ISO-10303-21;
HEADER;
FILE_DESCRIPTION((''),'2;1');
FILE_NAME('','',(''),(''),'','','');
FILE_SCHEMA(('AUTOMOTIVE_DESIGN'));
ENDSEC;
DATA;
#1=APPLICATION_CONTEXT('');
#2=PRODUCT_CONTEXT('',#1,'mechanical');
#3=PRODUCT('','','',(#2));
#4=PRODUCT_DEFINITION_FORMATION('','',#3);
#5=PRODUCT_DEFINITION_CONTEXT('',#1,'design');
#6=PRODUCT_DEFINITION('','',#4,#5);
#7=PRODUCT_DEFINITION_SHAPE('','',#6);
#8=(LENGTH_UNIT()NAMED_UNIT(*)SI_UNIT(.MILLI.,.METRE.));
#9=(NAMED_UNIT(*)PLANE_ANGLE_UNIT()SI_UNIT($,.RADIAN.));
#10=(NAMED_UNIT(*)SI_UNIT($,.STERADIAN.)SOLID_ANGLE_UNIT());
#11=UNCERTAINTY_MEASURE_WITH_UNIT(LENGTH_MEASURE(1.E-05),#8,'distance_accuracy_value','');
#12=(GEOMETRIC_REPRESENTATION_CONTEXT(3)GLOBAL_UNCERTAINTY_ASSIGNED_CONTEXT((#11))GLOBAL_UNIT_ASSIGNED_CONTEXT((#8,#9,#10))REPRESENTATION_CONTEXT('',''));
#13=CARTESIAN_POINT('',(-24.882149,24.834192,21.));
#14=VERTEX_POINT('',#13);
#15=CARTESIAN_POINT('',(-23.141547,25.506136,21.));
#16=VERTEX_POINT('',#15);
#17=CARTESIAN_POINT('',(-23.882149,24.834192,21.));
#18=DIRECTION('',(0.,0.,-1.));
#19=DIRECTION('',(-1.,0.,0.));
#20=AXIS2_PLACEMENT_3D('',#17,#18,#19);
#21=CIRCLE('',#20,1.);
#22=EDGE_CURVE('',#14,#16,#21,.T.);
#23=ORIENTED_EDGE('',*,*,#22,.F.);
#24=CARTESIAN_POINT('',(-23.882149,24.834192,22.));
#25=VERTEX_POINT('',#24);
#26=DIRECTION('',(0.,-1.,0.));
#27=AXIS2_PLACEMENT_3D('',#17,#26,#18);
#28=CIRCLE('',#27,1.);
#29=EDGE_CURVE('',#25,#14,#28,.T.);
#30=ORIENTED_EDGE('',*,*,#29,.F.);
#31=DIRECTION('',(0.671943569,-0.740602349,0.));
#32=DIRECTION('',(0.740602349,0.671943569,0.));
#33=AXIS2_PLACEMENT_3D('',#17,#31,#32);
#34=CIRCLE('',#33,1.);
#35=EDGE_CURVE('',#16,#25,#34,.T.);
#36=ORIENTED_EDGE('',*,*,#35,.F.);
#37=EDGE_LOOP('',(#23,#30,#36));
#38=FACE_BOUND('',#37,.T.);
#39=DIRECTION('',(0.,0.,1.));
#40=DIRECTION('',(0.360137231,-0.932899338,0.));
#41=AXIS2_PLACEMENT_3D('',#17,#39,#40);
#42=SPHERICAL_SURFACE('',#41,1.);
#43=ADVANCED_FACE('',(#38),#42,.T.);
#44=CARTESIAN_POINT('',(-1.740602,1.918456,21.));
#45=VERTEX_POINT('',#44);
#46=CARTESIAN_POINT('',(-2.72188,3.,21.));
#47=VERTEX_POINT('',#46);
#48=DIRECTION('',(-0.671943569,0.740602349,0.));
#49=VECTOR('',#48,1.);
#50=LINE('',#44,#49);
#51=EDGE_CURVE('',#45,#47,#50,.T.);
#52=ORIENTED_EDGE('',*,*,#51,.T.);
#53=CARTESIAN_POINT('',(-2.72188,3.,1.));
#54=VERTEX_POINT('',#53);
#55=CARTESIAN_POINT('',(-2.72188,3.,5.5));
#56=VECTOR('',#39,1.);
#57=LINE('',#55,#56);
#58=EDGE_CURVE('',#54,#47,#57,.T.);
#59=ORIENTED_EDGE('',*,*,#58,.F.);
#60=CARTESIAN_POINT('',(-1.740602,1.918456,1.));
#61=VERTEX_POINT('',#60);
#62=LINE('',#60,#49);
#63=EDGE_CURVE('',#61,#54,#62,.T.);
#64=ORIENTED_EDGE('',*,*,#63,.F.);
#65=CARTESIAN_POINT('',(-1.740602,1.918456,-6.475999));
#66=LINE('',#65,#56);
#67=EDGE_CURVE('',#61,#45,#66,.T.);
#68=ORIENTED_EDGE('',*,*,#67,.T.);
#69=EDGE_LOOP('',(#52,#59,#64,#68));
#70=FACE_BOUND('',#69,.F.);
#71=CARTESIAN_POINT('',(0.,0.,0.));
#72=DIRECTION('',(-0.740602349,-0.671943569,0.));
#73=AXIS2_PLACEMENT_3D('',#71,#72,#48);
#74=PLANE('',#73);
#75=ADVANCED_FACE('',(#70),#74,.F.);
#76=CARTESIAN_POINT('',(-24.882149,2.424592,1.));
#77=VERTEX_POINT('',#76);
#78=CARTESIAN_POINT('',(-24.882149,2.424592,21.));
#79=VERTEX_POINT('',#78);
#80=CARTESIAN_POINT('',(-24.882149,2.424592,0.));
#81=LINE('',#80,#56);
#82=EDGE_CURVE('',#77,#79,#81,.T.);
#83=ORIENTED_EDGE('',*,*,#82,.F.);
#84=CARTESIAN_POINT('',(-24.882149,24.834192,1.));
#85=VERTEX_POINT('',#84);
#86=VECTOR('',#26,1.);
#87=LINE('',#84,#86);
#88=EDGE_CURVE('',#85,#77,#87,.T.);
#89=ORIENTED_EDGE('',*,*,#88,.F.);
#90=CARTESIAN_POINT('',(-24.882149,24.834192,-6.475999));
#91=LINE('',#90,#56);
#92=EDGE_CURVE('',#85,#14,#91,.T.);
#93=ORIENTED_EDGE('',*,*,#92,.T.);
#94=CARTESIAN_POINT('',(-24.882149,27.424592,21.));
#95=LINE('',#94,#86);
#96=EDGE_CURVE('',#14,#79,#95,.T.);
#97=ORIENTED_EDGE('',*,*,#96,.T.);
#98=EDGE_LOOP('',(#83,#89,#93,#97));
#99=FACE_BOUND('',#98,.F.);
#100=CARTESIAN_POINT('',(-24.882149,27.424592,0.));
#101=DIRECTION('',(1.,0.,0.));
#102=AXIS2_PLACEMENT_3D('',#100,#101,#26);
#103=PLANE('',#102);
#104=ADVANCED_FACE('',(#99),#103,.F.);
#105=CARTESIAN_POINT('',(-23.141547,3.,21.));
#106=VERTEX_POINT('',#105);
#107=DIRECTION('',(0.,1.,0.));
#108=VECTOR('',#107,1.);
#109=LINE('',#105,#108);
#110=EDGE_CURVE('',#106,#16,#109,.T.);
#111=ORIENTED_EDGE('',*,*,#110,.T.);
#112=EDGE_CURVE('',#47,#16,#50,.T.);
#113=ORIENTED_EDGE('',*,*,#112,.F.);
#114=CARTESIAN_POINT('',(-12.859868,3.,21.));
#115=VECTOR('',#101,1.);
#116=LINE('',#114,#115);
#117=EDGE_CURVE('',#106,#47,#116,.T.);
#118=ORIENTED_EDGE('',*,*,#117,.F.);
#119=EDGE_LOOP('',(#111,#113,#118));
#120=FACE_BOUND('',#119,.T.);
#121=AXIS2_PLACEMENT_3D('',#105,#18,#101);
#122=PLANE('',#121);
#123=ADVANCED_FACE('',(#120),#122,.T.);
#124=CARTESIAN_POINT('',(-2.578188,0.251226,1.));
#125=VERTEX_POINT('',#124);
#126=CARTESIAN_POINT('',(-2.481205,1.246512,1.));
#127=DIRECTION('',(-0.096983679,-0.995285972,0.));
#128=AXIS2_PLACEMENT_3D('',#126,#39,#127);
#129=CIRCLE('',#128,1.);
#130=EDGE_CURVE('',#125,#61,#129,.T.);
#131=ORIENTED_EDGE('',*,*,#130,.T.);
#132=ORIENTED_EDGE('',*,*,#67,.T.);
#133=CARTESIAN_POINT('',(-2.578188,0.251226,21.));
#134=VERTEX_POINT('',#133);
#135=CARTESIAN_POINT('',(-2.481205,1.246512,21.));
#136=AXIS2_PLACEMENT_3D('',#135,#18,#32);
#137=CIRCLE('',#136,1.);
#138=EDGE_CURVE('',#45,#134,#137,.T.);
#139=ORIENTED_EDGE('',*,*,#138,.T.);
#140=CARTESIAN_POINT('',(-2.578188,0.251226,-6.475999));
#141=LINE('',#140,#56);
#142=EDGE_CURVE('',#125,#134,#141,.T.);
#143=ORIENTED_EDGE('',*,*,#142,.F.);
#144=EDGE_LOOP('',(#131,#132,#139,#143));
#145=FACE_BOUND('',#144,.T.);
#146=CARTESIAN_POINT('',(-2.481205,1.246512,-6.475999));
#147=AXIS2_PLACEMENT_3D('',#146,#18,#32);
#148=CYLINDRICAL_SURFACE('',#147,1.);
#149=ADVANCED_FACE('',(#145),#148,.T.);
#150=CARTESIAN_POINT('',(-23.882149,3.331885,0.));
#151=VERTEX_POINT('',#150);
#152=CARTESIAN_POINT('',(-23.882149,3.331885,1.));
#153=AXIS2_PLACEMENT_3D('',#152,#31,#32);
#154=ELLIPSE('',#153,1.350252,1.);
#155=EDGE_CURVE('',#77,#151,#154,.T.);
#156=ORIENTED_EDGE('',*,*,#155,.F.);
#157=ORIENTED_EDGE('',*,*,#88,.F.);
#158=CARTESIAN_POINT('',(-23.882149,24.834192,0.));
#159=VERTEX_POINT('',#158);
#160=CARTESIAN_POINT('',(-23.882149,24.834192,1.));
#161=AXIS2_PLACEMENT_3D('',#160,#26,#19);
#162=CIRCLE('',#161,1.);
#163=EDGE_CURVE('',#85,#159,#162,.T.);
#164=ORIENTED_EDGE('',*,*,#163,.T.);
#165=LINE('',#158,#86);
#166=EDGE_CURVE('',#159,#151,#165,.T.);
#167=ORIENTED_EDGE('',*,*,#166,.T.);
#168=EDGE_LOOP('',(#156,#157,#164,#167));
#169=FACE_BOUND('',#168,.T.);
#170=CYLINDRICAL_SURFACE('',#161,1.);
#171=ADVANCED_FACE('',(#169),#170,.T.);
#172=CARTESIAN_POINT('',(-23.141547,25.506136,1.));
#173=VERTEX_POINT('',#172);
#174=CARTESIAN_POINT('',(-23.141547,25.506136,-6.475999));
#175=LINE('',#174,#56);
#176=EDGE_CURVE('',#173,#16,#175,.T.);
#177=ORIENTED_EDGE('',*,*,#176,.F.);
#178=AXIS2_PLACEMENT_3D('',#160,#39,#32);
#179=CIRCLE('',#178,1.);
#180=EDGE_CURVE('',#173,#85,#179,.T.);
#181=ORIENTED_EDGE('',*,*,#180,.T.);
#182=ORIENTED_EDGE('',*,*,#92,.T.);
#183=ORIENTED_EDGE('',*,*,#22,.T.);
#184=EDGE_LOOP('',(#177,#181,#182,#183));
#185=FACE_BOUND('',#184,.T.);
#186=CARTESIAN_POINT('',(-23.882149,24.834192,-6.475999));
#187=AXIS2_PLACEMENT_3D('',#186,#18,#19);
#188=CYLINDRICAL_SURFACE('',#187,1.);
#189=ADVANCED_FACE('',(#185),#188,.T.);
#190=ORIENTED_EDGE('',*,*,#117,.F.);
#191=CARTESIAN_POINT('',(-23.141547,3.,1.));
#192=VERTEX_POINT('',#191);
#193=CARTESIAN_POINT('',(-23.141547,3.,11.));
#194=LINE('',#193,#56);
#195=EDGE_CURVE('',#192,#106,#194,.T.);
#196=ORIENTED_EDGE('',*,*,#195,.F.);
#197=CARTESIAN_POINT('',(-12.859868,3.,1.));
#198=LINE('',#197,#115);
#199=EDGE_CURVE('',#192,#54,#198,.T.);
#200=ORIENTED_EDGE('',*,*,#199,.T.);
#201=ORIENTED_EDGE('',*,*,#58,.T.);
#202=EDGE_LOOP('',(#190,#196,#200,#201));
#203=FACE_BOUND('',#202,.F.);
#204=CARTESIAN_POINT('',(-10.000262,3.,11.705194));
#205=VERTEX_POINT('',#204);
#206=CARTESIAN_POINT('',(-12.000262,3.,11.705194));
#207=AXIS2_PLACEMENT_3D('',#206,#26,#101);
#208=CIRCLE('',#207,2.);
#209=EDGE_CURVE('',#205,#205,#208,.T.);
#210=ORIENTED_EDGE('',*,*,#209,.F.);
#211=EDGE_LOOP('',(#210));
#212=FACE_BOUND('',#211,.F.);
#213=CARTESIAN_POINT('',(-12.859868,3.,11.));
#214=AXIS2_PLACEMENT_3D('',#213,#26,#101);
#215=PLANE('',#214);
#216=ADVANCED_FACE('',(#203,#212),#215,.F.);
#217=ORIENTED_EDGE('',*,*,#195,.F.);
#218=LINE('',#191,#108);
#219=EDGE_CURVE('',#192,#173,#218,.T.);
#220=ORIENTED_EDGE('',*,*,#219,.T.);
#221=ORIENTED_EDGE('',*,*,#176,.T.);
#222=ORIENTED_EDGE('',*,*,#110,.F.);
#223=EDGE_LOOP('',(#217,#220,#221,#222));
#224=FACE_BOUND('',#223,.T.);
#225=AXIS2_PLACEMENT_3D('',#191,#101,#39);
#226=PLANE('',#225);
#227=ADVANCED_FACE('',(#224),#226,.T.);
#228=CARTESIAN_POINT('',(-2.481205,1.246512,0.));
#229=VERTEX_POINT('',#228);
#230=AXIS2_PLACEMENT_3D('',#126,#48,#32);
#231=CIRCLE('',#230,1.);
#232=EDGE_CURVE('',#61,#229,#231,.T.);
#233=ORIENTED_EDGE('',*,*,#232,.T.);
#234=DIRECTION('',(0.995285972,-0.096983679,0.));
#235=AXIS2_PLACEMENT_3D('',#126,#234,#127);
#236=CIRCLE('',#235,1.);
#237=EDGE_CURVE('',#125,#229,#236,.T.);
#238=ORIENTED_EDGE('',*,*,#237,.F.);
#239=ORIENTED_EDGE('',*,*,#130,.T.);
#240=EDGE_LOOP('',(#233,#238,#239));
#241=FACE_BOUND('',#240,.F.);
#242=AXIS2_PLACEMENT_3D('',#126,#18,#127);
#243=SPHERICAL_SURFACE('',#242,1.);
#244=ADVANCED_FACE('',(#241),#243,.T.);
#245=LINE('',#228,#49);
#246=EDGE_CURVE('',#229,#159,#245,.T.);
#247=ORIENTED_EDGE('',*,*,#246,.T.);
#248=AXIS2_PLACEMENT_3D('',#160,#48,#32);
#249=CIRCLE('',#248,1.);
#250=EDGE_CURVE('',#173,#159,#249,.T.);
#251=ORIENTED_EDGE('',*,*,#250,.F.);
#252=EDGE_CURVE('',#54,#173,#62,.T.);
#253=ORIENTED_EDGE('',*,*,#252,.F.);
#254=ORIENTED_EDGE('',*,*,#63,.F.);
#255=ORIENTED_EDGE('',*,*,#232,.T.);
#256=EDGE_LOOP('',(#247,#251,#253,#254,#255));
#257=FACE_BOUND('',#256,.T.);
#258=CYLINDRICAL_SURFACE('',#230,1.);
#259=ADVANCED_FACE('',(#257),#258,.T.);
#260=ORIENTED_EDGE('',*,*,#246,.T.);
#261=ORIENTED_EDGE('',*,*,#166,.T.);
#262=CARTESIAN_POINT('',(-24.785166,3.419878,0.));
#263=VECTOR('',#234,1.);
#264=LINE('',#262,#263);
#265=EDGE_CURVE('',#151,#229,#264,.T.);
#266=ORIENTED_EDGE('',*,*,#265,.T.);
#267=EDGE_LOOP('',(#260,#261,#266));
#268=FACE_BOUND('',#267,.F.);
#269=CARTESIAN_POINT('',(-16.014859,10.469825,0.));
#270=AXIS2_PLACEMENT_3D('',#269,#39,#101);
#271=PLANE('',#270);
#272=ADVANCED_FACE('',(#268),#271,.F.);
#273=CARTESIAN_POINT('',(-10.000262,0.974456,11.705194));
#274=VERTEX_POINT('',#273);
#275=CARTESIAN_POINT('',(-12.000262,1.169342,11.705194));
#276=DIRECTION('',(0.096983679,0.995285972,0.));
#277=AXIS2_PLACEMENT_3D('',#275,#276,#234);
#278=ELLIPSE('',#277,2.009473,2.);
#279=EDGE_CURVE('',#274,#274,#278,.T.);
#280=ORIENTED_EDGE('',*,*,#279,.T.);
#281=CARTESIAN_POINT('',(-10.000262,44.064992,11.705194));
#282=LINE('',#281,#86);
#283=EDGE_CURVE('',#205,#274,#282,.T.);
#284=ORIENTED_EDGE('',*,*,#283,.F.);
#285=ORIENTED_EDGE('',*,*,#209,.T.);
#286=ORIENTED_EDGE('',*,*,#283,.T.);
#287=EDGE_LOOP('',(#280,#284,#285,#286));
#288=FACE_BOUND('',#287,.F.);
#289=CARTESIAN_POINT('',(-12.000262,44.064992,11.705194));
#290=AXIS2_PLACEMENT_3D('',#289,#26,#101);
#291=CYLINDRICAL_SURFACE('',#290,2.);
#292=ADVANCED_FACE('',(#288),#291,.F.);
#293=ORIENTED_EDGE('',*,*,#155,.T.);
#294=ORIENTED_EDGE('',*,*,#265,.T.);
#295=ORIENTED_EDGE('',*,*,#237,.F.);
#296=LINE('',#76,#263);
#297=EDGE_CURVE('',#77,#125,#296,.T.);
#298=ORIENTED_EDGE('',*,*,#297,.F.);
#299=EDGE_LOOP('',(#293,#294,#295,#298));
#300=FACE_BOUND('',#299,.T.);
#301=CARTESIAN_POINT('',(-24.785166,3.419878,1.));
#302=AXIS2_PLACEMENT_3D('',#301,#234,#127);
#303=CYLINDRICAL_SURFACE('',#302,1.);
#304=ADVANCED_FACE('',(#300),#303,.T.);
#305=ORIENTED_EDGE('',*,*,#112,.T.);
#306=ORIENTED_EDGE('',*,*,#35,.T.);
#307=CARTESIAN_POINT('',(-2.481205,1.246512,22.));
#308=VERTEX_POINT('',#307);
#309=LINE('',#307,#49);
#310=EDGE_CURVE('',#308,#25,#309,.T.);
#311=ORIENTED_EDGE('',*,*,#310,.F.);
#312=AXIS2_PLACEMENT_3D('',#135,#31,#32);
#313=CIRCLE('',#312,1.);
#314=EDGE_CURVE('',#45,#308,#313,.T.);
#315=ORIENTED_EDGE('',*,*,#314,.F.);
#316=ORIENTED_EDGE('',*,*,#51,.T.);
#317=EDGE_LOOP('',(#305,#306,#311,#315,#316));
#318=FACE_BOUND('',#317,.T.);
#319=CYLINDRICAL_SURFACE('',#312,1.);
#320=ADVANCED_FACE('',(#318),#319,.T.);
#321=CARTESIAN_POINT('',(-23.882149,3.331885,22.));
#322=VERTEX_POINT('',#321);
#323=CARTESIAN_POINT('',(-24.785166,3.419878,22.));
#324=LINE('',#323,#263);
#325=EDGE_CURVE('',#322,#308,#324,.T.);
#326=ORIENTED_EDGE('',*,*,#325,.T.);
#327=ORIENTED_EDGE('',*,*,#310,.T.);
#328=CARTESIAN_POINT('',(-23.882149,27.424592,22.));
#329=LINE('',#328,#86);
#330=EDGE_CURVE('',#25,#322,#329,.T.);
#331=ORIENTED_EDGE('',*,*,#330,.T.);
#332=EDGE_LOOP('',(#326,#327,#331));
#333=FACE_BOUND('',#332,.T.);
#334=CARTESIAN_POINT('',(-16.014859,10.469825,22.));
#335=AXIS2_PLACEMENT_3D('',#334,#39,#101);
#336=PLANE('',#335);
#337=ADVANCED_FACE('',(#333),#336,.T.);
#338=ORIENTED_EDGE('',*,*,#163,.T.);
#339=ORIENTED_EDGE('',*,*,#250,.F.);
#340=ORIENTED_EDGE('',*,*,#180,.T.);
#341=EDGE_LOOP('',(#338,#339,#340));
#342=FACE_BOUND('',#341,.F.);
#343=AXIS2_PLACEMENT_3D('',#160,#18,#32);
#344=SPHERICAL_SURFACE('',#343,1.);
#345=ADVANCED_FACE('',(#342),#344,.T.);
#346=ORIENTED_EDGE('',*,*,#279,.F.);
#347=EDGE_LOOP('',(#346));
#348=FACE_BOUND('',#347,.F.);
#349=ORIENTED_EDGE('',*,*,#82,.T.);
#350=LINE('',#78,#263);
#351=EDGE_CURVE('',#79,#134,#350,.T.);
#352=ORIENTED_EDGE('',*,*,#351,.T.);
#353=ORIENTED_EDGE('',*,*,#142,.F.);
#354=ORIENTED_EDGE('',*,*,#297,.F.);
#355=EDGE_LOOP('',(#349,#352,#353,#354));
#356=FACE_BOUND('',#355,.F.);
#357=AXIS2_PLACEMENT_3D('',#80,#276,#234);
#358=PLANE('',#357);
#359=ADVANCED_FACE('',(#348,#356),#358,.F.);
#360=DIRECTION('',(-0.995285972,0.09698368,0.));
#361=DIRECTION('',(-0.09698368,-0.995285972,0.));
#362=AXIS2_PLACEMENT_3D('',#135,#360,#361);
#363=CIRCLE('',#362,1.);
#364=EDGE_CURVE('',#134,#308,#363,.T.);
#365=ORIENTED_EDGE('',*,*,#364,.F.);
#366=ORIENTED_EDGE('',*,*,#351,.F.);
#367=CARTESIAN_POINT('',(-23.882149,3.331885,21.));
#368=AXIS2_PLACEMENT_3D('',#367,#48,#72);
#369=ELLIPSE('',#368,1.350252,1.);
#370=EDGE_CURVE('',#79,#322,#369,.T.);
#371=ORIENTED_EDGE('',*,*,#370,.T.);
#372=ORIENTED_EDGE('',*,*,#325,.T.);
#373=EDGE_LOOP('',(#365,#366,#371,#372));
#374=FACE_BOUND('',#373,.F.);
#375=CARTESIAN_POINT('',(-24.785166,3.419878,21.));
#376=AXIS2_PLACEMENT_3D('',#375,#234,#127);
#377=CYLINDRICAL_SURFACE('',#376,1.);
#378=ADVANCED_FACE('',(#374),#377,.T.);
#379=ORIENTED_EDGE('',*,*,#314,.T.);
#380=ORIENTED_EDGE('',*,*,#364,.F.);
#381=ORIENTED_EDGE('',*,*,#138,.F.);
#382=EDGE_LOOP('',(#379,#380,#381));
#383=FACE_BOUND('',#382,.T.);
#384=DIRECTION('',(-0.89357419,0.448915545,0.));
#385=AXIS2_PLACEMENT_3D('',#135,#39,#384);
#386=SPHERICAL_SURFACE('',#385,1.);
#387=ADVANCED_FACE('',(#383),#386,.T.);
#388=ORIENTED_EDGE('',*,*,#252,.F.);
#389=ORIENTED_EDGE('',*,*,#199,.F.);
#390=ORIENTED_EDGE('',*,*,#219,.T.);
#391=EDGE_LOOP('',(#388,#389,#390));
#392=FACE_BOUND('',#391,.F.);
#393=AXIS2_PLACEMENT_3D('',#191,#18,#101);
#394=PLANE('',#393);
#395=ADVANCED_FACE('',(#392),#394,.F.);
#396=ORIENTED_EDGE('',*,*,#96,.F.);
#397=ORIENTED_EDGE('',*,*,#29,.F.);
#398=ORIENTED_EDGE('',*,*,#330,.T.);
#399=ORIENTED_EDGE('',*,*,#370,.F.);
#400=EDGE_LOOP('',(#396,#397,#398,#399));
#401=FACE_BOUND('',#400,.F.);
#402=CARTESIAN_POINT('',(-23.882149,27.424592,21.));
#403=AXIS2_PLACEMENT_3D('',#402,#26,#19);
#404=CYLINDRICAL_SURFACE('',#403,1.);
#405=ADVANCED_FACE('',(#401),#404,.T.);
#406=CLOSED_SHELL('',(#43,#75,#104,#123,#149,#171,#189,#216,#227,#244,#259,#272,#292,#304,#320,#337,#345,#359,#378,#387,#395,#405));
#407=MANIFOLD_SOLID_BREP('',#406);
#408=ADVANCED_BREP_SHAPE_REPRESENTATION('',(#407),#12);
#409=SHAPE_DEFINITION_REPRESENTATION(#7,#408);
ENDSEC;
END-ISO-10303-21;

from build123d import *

# Parameters (mm, degrees)
F1_DEPTH     = 22
F2_R         = 1
F3_T1_DEPTH  = 31.8493182741
F3_T3_DEPTH  = 27.4759989859
F3_T8_DEPTH  = 1
F3_T14_DEPTH = 1
F4_R         = 1
F6_W         = 20.563358571
F6_H         = 20
F7_DEPTH     = 25
F9_D         = 4


# Not quite as in the source:
# - a fillet or chamfer that OpenCascade refuses, or shapes differently, is made with other operations: its cross-section is extruded or revolved along the edge and cut away or added


with BuildPart() as f1:
    # F0 (on Top) → F1 (new body)
    with BuildSketch(Plane.XY):
        Polygon((-24.8821492983, 2.4245919862), (0, 0), (-24.8821492983, 27.4245919862), align=None)
    extrude(amount=F1_DEPTH)

    # F2
    f2_edges = [f1.edges().sort_by_distance(p)[0] for p in [
        (-24.882149, 14.924592, 22),
        (-12.441075, 1.212296, 22),
    ]]
    fillet(f2_edges, radius=F2_R)

    # F3: fillet of radius 1 on 1 edges, made by hand

    # F3_s2 → F3_t1 (cut)
    with BuildSketch(Plane(origin=(-1.7406023493, 1.9184560251, 0), x_dir=(0, 0, 1), z_dir=(-0.6719435693, 0.7406023493, 0))):
        with BuildLine():
            ThreePointArc((21, 0), (21.7071067812, -0.2928932188), (22, -1))
            Line((22, -1), (22, 0))
            Line((22, 0), (21, 0))
        make_face()
    extrude(amount=F3_T1_DEPTH, mode=Mode.SUBTRACT)

    # F3_s4 → F3_t3 (cut)
    with BuildSketch(Plane.XY.offset(-6.4759989859)):
        with BuildLine():
            ThreePointArc((-24.8821492983, 24.8341923918), (-24.2422865296, 25.7670917297), (-23.141546949, 25.5061359611))
            Line((-23.141546949, 25.5061359611), (-24.8821492983, 27.4245919862))
            Line((-24.8821492983, 27.4245919862), (-24.8821492983, 24.8341923918))
        make_face()
        with BuildLine():
            ThreePointArc((-1.7406023493, 1.9184560251), (-1.5876305081, 0.7975969112), (-2.578188378, 0.2512264839))
            Line((-2.578188378, 0.2512264839), (0, 0))
            Line((0, 0), (-1.7406023493, 1.9184560251))
        make_face()
    extrude(amount=F3_T3_DEPTH, mode=Mode.SUBTRACT)


with BuildPart() as f3_tool6:
    # F3_s7 → F3_t8 (new body)
    with BuildSketch(Plane.XY.offset(21)):
        Polygon((-2.4812046985, 1.2465124558), (-1.7406023493, 1.9184560251), (0, 0), (-2.578188378, 0.2512264839), align=None)
    extrude(amount=F3_T8_DEPTH)

    # F3_s9 → F3_t10 (revolve, cut)
    with BuildSketch(Plane(origin=(-2.4812046985, 1.2465124558, 21), x_dir=(-0.8935741904, 0.4489155446, 0), z_dir=(0.4489155446, 0.8935741904, 0))):
        with BuildLine():
            ThreePointArc((0, -1), (1, 0), (0, 1))
            Line((0, 1), (0, -1))
        make_face()
    revolve(axis=Axis((-2.4812046985, 1.2465124558, 21), (0, 0, 1)), mode=Mode.SUBTRACT)


with BuildPart() as f1_1:
    add(f1.part)

    # F3_t5: cut F3_tool6
    add(f3_tool6.part, mode=Mode.SUBTRACT)


with BuildPart() as f3_tool12:
    # F3_s13 → F3_t14 (new body)
    with BuildSketch(Plane.XY.offset(21)):
        Polygon((-23.8821492983, 24.8341923918), (-24.8821492983, 24.8341923918), (-24.8821492983, 27.4245919862), (-23.141546949, 25.5061359611), align=None)
    extrude(amount=F3_T14_DEPTH)

    # F3_s15 → F3_t16 (revolve, cut)
    with BuildSketch(Plane(origin=(-23.8821492983, 24.8341923918, 21), x_dir=(0.3601372313, -0.9328993379, 0), z_dir=(-0.9328993379, -0.3601372313, 0))):
        with BuildLine():
            ThreePointArc((0, -1), (1, 0), (0, 1))
            Line((0, 1), (0, -1))
        make_face()
    revolve(axis=Axis((-23.8821492983, 24.8341923918, 21), (0, 0, 1)), mode=Mode.SUBTRACT)


with BuildPart() as f1_2:
    add(f1_1.part)

    # F3_t11: cut F3_tool12
    add(f3_tool12.part, mode=Mode.SUBTRACT)

    # F4
    f4_edges = [f1_2.edges().sort_by_distance(p)[0] for p in [
        (-13.730169, 1.337909, 0),
    ]]
    fillet(f4_edges, radius=F4_R)

    # F6 (on offset) → F7 (cut)
    with BuildSketch(Plane.XZ.offset(-3)):
        with Locations((-12.8598676635, 11)):
            Rectangle(F6_W, F6_H)
    extrude(amount=-F7_DEPTH, mode=Mode.SUBTRACT)

    # F9 (through all)
    with Locations(Plane(origin=(0, 3, 0), x_dir=(-1, 0, 0), z_dir=(0, 1, 0))):
        with Locations((12.000261806, 11.7051936686)):
            Hole(F9_D / 2)


solid = f1_2.part
